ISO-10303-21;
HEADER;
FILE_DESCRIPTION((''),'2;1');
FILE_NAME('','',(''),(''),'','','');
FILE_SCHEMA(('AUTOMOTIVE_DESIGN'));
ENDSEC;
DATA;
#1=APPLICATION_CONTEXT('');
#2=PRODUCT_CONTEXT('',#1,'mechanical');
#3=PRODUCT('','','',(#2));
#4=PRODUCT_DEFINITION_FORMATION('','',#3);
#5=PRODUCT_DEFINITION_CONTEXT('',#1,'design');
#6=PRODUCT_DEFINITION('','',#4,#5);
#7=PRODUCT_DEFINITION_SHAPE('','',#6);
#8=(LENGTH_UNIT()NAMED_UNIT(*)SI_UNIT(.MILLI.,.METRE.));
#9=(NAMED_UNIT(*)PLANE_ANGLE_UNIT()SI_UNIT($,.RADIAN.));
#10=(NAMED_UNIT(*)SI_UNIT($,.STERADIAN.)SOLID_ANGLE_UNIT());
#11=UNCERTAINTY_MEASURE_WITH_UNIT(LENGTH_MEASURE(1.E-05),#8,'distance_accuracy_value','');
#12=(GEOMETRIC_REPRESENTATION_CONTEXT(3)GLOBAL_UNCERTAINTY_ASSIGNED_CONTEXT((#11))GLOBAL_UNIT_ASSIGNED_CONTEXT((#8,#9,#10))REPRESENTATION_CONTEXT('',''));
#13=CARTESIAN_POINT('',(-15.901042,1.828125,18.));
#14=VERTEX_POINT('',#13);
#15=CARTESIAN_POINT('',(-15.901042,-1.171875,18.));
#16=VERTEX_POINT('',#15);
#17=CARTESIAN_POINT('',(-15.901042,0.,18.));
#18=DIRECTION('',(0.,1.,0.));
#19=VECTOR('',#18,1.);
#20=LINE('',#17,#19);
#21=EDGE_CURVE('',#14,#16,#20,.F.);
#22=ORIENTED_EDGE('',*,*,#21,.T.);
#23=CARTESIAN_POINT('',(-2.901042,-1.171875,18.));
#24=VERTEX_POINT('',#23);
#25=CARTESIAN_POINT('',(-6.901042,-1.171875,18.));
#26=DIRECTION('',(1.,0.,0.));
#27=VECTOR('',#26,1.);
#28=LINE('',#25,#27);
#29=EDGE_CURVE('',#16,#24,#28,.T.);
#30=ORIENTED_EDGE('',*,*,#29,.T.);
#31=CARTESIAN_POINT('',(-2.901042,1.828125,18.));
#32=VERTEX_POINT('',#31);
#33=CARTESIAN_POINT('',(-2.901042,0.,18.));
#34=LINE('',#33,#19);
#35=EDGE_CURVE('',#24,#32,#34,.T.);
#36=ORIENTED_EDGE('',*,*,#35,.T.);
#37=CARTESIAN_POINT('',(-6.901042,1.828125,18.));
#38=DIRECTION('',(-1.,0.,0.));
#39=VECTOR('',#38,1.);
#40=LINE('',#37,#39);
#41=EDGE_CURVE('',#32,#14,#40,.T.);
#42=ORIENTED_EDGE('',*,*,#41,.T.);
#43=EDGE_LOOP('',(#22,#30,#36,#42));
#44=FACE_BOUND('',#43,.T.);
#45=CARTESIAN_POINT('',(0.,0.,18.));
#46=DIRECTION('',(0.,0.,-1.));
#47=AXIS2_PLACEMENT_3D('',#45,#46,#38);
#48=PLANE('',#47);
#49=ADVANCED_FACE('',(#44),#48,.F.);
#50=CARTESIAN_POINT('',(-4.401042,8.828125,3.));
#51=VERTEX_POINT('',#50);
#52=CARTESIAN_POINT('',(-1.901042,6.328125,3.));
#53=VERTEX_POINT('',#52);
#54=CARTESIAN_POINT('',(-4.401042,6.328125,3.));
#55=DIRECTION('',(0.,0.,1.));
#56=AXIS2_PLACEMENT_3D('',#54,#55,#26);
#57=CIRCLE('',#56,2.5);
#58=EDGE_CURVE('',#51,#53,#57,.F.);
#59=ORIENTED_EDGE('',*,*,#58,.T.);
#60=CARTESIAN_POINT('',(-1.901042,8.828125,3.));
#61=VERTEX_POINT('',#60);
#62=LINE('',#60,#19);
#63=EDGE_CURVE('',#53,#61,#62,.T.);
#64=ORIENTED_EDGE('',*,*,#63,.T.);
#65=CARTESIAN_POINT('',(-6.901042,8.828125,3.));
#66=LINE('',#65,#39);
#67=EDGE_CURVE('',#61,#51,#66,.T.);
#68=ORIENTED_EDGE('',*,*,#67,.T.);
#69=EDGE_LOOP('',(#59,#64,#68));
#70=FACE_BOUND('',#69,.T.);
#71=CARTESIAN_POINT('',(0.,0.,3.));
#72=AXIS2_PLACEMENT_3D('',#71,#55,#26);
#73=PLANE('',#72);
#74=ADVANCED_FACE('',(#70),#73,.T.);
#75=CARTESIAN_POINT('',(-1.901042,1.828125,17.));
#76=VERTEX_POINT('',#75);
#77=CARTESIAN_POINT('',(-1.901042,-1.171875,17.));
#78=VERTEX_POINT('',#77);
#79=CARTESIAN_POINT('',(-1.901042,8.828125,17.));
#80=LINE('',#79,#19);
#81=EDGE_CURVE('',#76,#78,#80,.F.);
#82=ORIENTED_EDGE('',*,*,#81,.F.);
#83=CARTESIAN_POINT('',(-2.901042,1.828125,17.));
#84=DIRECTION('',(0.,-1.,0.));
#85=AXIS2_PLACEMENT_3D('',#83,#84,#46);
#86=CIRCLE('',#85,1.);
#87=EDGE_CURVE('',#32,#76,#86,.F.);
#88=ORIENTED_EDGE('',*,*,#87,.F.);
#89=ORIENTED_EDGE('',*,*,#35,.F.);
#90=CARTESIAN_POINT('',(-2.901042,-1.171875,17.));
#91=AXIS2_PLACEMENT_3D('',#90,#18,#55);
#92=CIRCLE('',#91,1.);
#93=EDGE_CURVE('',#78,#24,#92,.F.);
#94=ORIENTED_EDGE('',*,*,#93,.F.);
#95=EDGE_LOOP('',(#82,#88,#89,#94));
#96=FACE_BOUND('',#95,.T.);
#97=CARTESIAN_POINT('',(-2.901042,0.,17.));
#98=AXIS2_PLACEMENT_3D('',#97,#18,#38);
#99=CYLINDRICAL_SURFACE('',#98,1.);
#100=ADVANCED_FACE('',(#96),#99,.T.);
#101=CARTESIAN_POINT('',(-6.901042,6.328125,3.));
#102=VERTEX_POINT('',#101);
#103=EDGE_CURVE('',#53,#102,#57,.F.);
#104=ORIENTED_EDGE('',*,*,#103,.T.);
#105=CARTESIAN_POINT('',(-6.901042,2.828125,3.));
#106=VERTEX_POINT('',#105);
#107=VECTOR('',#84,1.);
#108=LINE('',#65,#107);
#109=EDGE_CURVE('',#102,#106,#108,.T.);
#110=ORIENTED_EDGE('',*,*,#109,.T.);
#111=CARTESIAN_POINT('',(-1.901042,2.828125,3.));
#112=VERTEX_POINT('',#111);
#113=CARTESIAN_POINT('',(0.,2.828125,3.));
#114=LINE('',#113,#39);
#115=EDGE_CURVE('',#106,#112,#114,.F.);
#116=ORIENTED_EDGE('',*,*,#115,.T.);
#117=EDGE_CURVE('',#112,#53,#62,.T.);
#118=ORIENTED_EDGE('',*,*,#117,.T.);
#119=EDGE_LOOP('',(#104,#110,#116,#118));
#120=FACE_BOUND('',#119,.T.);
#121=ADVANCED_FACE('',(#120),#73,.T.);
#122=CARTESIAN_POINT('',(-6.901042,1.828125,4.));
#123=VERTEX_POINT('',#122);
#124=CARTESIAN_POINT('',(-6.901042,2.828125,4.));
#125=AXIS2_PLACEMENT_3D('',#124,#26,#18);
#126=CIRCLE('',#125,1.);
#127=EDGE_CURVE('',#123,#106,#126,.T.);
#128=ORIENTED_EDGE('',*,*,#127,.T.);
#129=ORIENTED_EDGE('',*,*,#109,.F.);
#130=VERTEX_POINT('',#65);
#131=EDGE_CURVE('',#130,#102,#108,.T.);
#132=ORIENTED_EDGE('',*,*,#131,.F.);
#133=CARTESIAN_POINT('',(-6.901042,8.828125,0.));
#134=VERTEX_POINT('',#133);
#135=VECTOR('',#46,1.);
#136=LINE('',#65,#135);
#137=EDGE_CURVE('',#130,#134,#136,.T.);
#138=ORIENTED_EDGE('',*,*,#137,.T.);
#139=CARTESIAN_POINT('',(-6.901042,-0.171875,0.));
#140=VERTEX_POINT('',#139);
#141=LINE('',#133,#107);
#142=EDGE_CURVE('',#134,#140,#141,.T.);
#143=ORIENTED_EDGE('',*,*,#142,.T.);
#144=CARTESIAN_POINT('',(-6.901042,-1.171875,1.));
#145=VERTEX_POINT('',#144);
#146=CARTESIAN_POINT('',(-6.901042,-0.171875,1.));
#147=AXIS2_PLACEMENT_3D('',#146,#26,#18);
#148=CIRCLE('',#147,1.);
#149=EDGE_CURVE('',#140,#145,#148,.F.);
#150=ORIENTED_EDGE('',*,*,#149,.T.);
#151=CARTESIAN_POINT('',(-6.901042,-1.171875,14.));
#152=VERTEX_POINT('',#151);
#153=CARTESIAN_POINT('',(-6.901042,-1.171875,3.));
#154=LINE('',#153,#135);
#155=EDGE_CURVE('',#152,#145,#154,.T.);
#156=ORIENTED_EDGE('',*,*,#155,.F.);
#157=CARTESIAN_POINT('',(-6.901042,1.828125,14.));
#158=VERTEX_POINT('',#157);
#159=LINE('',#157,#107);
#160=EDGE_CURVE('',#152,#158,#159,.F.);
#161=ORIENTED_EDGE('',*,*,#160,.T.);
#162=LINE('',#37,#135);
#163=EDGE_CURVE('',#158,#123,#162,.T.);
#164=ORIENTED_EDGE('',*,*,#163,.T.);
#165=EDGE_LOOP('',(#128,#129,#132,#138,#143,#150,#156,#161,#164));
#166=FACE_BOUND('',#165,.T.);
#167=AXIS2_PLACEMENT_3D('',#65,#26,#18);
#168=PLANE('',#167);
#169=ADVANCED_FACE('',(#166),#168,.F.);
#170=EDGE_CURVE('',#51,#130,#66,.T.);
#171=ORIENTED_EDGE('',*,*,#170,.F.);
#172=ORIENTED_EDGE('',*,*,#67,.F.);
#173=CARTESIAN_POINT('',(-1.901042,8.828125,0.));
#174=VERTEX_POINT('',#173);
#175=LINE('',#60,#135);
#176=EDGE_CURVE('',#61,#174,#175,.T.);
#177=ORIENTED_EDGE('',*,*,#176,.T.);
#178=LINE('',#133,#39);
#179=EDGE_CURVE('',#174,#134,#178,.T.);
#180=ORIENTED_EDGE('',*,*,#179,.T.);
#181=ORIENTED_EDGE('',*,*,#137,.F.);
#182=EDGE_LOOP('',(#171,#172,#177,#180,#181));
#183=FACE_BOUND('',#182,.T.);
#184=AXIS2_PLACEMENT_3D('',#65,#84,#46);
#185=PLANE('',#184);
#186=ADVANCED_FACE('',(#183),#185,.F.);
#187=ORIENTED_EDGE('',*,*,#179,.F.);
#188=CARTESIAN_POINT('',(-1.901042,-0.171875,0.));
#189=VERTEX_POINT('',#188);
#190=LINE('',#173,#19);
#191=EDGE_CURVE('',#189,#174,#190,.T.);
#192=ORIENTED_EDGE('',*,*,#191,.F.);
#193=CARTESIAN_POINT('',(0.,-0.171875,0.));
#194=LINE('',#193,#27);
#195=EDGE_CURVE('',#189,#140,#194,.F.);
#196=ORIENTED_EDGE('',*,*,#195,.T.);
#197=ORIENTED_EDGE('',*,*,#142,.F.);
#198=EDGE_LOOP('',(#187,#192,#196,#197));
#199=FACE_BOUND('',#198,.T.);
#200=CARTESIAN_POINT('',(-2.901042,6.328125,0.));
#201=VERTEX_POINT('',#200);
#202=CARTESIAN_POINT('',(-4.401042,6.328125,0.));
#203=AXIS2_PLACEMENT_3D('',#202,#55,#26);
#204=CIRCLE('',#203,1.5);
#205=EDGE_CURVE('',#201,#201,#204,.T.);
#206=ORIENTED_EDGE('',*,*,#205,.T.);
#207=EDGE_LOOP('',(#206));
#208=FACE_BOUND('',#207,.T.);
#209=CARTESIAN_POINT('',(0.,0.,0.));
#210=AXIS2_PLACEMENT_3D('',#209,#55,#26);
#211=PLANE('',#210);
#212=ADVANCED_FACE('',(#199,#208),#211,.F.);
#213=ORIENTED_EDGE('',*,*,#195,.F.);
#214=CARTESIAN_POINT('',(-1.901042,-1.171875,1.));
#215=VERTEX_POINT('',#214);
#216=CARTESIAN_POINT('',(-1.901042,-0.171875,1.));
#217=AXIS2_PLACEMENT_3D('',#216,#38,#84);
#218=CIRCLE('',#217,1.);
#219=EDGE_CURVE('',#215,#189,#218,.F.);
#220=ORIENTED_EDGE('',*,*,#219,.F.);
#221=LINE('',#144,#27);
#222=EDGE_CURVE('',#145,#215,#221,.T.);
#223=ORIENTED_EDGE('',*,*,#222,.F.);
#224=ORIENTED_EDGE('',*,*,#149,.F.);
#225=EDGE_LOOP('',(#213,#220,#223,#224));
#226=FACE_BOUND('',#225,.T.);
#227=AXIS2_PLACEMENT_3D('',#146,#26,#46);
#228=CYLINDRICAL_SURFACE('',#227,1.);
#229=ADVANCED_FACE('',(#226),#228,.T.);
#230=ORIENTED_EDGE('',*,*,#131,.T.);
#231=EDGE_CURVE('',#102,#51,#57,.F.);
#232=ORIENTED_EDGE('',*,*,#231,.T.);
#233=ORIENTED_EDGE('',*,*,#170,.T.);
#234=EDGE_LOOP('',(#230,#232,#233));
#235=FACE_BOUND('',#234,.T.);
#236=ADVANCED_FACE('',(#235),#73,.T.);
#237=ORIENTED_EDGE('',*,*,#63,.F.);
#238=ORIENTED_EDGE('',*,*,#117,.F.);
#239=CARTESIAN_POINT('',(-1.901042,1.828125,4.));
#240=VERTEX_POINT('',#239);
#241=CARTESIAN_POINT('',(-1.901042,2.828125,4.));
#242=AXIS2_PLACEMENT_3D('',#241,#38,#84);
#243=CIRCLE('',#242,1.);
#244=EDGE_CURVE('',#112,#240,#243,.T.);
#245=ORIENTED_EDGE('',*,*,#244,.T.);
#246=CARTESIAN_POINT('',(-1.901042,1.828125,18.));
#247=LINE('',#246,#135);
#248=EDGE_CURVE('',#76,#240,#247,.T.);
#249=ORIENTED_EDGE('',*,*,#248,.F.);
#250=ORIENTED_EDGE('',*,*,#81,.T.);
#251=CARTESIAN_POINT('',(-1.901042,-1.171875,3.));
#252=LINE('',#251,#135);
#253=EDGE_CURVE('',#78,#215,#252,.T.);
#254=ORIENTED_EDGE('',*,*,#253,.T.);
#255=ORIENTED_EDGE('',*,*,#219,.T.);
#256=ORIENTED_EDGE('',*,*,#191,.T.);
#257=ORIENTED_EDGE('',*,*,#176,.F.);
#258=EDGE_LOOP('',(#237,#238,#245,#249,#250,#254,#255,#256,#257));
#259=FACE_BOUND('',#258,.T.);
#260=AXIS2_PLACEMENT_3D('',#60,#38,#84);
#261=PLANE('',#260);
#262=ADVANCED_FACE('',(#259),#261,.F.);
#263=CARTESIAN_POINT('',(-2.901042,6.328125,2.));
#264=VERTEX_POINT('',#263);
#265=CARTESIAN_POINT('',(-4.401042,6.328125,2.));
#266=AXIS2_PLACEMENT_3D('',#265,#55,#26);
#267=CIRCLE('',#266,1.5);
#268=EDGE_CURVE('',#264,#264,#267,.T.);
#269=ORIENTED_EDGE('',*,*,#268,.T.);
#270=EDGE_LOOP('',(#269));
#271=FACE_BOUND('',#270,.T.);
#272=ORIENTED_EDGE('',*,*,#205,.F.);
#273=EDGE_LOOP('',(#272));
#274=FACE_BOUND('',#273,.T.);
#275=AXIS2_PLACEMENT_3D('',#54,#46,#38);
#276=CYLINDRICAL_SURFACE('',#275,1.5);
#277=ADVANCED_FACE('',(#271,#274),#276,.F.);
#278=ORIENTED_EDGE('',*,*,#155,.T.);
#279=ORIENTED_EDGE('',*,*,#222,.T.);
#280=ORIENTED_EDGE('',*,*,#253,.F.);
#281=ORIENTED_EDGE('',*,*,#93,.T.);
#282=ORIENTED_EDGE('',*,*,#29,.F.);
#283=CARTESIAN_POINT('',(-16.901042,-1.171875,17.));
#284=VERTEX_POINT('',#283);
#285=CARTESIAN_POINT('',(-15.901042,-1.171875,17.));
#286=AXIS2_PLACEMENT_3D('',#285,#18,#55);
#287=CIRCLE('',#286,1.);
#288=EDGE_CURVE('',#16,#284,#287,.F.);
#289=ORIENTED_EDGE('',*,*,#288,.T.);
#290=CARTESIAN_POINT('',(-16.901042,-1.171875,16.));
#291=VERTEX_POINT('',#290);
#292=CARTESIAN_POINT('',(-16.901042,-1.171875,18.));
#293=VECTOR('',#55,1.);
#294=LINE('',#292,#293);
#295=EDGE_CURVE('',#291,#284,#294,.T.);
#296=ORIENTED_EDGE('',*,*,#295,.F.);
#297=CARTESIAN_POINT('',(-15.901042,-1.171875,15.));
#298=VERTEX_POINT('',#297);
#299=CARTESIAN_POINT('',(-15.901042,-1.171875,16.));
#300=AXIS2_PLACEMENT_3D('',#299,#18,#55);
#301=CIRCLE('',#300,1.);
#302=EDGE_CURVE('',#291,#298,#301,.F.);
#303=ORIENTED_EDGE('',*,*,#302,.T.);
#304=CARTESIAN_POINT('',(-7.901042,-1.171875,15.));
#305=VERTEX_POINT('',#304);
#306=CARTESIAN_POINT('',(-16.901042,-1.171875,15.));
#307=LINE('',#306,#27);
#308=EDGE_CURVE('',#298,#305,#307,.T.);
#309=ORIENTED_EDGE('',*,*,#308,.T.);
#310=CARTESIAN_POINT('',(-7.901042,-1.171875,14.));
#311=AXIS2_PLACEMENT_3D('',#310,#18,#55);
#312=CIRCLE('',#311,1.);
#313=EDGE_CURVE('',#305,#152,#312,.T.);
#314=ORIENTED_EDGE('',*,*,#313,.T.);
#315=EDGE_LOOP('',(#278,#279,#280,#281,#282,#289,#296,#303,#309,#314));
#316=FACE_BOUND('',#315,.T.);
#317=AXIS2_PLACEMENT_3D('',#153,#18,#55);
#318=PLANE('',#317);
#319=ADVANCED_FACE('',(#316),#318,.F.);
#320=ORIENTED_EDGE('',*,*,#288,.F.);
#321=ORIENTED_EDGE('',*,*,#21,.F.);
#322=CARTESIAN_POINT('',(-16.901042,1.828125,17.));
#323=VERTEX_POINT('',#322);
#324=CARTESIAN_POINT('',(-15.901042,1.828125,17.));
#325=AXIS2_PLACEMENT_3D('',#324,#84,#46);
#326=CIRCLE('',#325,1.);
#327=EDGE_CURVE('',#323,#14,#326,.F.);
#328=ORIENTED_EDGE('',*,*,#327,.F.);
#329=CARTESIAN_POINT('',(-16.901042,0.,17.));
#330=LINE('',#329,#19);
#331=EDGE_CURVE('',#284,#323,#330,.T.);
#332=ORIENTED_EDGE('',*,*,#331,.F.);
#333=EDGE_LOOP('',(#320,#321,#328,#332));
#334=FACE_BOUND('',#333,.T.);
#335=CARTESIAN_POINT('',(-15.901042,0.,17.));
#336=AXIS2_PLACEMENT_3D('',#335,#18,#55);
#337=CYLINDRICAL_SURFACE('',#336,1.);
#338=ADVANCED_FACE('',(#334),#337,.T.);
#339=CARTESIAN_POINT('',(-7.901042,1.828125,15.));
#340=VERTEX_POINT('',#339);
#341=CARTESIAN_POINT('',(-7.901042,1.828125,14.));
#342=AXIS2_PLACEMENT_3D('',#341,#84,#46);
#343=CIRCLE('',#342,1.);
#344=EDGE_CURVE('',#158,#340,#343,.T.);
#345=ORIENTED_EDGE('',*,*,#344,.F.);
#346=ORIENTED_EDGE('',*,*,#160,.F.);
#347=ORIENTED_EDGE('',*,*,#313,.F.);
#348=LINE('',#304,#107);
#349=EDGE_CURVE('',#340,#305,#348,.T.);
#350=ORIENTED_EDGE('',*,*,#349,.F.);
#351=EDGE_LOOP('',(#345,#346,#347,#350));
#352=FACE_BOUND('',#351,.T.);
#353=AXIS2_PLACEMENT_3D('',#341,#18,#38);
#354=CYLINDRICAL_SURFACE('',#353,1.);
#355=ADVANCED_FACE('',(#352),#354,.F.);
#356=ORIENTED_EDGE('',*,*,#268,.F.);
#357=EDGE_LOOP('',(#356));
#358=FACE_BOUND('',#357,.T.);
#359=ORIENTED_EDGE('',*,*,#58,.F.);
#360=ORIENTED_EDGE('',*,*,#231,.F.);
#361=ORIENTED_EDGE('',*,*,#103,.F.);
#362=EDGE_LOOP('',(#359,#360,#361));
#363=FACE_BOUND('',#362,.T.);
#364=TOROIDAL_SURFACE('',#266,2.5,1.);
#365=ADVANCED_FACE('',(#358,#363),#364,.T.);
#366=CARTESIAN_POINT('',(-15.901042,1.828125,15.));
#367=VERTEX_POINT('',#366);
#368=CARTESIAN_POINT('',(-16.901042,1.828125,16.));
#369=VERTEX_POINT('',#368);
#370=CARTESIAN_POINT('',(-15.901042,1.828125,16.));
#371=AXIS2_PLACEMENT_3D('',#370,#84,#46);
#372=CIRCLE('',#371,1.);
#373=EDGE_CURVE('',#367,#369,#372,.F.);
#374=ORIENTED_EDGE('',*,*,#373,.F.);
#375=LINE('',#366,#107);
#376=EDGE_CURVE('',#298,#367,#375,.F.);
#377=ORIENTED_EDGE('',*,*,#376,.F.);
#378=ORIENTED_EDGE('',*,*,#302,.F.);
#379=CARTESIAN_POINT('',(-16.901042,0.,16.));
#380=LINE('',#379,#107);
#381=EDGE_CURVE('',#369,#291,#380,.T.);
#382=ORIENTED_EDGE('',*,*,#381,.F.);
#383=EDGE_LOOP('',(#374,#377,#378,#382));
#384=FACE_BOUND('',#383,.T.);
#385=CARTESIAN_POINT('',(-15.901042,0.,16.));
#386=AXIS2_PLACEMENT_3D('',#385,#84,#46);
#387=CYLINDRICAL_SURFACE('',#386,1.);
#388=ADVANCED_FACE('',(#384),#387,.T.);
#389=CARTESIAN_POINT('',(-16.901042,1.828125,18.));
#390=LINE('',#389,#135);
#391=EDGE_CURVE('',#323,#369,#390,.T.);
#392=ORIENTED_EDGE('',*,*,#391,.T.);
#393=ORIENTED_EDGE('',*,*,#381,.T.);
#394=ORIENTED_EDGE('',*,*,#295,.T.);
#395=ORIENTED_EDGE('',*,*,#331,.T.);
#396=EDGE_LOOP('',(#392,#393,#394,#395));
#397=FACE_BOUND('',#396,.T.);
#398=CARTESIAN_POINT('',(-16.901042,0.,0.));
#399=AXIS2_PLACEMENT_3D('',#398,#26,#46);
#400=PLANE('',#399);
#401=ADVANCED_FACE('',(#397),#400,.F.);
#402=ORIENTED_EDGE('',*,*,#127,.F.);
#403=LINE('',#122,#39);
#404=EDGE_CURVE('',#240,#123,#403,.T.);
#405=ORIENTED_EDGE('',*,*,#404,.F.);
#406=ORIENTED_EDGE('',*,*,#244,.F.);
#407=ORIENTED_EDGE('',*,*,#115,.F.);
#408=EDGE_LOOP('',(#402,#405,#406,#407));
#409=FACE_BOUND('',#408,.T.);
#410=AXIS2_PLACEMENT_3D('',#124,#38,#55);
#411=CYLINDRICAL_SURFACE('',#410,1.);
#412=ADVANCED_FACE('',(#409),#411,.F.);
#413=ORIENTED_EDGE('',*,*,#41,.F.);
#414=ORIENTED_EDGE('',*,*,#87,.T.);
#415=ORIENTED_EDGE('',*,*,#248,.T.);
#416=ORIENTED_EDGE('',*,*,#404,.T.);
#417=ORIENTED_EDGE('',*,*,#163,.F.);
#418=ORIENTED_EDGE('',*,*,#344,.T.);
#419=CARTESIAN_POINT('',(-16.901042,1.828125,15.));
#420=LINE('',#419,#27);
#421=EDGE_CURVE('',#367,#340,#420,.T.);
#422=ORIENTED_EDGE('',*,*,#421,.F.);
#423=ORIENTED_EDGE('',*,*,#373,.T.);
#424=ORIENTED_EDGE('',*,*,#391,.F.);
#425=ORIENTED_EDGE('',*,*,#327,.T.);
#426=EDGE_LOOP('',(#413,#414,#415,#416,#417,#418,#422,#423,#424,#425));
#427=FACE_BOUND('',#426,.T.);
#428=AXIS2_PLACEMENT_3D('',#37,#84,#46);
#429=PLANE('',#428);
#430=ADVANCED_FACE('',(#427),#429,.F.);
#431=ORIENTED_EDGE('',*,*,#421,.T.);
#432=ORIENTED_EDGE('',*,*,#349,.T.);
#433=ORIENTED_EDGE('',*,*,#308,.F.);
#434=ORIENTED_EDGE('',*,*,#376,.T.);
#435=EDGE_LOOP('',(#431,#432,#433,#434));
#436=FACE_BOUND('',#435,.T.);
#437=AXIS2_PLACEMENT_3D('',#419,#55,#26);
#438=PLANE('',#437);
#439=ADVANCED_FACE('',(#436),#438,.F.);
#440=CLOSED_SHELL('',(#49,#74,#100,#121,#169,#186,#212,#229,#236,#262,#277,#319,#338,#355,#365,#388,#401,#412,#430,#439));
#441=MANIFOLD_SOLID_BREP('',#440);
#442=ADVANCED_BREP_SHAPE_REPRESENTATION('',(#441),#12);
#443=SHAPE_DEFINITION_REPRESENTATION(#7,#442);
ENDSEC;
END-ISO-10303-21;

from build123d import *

# Parameters (mm, degrees)
SKETCH1_W           = 5
SKETCH1_H           = 10
SKETCH1_R           = 1.5
BOSS_EXTRUDE1_DEPTH = 3
SKETCH2_W           = 5
SKETCH2_H           = 3
BOSS_EXTRUDE2_DEPTH = 15
SKETCH3_W           = 3
SKETCH3_H           = 3
BOSS_EXTRUDE3_DEPTH = 10
FILLET1_R           = 1
FILLET2_R           = 1
FILLET3_R           = 1
FILLET4_R           = 1
FILLET5_R           = 1
FILLET6_R           = 1
FILLET7_R           = 1


with BuildPart() as part:
    # Sketch1 → Boss-Extrude1 (new body)
    with BuildSketch(Plane.XY):
        with Locations((-4.401041667, 3.828125)):
            Rectangle(SKETCH1_W, SKETCH1_H)
        with Locations((-4.401041667, 6.328125)):
            Circle(SKETCH1_R, mode=Mode.SUBTRACT)
    extrude(amount=BOSS_EXTRUDE1_DEPTH)

    # Sketch2 → Boss-Extrude2 (add)
    with BuildSketch(Plane.XY.offset(3)):
        with Locations((-4.401041667, 0.328125)):
            Rectangle(SKETCH2_W, SKETCH2_H)
    extrude(amount=BOSS_EXTRUDE2_DEPTH)

    # Sketch3 → Boss-Extrude3 (add)
    with BuildSketch(Plane.ZY.offset(6.901041667)):
        with Locations((16.5, 0.328125)):
            Rectangle(SKETCH3_W, SKETCH3_H)
    extrude(amount=BOSS_EXTRUDE3_DEPTH)

    # Fillet1
    fillet1_edges = [part.edges().sort_by_distance(p)[0] for p in [
        (-6.901041667, 0.328125, 15),
    ]]
    fillet(fillet1_edges, radius=FILLET1_R)

    # Fillet2
    fillet2_edges = [part.edges().sort_by_distance(p)[0] for p in [
        (-1.901041667, 0.328125, 18),
    ]]
    fillet(fillet2_edges, radius=FILLET2_R)

    # Fillet3
    fillet3_edges = [part.edges().sort_by_distance(p)[0] for p in [
        (-16.901041667, 0.328125, 15),
    ]]
    fillet(fillet3_edges, radius=FILLET3_R)

    # Fillet4
    fillet4_edges = [part.edges().sort_by_distance(p)[0] for p in [
        (-16.901041667, 0.328125, 18),
    ]]
    fillet(fillet4_edges, radius=FILLET4_R)

    # Fillet5
    fillet5_edges = [part.edges().sort_by_distance(p)[0] for p in [
        (-5.901041667, 6.328125, 3),
    ]]
    fillet(fillet5_edges, radius=FILLET5_R - 0.0001)  # a hair under: the kernel refuses the full size

    # Fillet6
    fillet6_edges = [part.edges().sort_by_distance(p)[0] for p in [
        (-4.401041667, -1.171875, 0),
    ]]
    fillet(fillet6_edges, radius=FILLET6_R)

    # Fillet7
    fillet7_edges = [part.edges().sort_by_distance(p)[0] for p in [
        (-4.401041667, 1.828125, 3),
    ]]
    fillet(fillet7_edges, radius=FILLET7_R)


solid = part.part
